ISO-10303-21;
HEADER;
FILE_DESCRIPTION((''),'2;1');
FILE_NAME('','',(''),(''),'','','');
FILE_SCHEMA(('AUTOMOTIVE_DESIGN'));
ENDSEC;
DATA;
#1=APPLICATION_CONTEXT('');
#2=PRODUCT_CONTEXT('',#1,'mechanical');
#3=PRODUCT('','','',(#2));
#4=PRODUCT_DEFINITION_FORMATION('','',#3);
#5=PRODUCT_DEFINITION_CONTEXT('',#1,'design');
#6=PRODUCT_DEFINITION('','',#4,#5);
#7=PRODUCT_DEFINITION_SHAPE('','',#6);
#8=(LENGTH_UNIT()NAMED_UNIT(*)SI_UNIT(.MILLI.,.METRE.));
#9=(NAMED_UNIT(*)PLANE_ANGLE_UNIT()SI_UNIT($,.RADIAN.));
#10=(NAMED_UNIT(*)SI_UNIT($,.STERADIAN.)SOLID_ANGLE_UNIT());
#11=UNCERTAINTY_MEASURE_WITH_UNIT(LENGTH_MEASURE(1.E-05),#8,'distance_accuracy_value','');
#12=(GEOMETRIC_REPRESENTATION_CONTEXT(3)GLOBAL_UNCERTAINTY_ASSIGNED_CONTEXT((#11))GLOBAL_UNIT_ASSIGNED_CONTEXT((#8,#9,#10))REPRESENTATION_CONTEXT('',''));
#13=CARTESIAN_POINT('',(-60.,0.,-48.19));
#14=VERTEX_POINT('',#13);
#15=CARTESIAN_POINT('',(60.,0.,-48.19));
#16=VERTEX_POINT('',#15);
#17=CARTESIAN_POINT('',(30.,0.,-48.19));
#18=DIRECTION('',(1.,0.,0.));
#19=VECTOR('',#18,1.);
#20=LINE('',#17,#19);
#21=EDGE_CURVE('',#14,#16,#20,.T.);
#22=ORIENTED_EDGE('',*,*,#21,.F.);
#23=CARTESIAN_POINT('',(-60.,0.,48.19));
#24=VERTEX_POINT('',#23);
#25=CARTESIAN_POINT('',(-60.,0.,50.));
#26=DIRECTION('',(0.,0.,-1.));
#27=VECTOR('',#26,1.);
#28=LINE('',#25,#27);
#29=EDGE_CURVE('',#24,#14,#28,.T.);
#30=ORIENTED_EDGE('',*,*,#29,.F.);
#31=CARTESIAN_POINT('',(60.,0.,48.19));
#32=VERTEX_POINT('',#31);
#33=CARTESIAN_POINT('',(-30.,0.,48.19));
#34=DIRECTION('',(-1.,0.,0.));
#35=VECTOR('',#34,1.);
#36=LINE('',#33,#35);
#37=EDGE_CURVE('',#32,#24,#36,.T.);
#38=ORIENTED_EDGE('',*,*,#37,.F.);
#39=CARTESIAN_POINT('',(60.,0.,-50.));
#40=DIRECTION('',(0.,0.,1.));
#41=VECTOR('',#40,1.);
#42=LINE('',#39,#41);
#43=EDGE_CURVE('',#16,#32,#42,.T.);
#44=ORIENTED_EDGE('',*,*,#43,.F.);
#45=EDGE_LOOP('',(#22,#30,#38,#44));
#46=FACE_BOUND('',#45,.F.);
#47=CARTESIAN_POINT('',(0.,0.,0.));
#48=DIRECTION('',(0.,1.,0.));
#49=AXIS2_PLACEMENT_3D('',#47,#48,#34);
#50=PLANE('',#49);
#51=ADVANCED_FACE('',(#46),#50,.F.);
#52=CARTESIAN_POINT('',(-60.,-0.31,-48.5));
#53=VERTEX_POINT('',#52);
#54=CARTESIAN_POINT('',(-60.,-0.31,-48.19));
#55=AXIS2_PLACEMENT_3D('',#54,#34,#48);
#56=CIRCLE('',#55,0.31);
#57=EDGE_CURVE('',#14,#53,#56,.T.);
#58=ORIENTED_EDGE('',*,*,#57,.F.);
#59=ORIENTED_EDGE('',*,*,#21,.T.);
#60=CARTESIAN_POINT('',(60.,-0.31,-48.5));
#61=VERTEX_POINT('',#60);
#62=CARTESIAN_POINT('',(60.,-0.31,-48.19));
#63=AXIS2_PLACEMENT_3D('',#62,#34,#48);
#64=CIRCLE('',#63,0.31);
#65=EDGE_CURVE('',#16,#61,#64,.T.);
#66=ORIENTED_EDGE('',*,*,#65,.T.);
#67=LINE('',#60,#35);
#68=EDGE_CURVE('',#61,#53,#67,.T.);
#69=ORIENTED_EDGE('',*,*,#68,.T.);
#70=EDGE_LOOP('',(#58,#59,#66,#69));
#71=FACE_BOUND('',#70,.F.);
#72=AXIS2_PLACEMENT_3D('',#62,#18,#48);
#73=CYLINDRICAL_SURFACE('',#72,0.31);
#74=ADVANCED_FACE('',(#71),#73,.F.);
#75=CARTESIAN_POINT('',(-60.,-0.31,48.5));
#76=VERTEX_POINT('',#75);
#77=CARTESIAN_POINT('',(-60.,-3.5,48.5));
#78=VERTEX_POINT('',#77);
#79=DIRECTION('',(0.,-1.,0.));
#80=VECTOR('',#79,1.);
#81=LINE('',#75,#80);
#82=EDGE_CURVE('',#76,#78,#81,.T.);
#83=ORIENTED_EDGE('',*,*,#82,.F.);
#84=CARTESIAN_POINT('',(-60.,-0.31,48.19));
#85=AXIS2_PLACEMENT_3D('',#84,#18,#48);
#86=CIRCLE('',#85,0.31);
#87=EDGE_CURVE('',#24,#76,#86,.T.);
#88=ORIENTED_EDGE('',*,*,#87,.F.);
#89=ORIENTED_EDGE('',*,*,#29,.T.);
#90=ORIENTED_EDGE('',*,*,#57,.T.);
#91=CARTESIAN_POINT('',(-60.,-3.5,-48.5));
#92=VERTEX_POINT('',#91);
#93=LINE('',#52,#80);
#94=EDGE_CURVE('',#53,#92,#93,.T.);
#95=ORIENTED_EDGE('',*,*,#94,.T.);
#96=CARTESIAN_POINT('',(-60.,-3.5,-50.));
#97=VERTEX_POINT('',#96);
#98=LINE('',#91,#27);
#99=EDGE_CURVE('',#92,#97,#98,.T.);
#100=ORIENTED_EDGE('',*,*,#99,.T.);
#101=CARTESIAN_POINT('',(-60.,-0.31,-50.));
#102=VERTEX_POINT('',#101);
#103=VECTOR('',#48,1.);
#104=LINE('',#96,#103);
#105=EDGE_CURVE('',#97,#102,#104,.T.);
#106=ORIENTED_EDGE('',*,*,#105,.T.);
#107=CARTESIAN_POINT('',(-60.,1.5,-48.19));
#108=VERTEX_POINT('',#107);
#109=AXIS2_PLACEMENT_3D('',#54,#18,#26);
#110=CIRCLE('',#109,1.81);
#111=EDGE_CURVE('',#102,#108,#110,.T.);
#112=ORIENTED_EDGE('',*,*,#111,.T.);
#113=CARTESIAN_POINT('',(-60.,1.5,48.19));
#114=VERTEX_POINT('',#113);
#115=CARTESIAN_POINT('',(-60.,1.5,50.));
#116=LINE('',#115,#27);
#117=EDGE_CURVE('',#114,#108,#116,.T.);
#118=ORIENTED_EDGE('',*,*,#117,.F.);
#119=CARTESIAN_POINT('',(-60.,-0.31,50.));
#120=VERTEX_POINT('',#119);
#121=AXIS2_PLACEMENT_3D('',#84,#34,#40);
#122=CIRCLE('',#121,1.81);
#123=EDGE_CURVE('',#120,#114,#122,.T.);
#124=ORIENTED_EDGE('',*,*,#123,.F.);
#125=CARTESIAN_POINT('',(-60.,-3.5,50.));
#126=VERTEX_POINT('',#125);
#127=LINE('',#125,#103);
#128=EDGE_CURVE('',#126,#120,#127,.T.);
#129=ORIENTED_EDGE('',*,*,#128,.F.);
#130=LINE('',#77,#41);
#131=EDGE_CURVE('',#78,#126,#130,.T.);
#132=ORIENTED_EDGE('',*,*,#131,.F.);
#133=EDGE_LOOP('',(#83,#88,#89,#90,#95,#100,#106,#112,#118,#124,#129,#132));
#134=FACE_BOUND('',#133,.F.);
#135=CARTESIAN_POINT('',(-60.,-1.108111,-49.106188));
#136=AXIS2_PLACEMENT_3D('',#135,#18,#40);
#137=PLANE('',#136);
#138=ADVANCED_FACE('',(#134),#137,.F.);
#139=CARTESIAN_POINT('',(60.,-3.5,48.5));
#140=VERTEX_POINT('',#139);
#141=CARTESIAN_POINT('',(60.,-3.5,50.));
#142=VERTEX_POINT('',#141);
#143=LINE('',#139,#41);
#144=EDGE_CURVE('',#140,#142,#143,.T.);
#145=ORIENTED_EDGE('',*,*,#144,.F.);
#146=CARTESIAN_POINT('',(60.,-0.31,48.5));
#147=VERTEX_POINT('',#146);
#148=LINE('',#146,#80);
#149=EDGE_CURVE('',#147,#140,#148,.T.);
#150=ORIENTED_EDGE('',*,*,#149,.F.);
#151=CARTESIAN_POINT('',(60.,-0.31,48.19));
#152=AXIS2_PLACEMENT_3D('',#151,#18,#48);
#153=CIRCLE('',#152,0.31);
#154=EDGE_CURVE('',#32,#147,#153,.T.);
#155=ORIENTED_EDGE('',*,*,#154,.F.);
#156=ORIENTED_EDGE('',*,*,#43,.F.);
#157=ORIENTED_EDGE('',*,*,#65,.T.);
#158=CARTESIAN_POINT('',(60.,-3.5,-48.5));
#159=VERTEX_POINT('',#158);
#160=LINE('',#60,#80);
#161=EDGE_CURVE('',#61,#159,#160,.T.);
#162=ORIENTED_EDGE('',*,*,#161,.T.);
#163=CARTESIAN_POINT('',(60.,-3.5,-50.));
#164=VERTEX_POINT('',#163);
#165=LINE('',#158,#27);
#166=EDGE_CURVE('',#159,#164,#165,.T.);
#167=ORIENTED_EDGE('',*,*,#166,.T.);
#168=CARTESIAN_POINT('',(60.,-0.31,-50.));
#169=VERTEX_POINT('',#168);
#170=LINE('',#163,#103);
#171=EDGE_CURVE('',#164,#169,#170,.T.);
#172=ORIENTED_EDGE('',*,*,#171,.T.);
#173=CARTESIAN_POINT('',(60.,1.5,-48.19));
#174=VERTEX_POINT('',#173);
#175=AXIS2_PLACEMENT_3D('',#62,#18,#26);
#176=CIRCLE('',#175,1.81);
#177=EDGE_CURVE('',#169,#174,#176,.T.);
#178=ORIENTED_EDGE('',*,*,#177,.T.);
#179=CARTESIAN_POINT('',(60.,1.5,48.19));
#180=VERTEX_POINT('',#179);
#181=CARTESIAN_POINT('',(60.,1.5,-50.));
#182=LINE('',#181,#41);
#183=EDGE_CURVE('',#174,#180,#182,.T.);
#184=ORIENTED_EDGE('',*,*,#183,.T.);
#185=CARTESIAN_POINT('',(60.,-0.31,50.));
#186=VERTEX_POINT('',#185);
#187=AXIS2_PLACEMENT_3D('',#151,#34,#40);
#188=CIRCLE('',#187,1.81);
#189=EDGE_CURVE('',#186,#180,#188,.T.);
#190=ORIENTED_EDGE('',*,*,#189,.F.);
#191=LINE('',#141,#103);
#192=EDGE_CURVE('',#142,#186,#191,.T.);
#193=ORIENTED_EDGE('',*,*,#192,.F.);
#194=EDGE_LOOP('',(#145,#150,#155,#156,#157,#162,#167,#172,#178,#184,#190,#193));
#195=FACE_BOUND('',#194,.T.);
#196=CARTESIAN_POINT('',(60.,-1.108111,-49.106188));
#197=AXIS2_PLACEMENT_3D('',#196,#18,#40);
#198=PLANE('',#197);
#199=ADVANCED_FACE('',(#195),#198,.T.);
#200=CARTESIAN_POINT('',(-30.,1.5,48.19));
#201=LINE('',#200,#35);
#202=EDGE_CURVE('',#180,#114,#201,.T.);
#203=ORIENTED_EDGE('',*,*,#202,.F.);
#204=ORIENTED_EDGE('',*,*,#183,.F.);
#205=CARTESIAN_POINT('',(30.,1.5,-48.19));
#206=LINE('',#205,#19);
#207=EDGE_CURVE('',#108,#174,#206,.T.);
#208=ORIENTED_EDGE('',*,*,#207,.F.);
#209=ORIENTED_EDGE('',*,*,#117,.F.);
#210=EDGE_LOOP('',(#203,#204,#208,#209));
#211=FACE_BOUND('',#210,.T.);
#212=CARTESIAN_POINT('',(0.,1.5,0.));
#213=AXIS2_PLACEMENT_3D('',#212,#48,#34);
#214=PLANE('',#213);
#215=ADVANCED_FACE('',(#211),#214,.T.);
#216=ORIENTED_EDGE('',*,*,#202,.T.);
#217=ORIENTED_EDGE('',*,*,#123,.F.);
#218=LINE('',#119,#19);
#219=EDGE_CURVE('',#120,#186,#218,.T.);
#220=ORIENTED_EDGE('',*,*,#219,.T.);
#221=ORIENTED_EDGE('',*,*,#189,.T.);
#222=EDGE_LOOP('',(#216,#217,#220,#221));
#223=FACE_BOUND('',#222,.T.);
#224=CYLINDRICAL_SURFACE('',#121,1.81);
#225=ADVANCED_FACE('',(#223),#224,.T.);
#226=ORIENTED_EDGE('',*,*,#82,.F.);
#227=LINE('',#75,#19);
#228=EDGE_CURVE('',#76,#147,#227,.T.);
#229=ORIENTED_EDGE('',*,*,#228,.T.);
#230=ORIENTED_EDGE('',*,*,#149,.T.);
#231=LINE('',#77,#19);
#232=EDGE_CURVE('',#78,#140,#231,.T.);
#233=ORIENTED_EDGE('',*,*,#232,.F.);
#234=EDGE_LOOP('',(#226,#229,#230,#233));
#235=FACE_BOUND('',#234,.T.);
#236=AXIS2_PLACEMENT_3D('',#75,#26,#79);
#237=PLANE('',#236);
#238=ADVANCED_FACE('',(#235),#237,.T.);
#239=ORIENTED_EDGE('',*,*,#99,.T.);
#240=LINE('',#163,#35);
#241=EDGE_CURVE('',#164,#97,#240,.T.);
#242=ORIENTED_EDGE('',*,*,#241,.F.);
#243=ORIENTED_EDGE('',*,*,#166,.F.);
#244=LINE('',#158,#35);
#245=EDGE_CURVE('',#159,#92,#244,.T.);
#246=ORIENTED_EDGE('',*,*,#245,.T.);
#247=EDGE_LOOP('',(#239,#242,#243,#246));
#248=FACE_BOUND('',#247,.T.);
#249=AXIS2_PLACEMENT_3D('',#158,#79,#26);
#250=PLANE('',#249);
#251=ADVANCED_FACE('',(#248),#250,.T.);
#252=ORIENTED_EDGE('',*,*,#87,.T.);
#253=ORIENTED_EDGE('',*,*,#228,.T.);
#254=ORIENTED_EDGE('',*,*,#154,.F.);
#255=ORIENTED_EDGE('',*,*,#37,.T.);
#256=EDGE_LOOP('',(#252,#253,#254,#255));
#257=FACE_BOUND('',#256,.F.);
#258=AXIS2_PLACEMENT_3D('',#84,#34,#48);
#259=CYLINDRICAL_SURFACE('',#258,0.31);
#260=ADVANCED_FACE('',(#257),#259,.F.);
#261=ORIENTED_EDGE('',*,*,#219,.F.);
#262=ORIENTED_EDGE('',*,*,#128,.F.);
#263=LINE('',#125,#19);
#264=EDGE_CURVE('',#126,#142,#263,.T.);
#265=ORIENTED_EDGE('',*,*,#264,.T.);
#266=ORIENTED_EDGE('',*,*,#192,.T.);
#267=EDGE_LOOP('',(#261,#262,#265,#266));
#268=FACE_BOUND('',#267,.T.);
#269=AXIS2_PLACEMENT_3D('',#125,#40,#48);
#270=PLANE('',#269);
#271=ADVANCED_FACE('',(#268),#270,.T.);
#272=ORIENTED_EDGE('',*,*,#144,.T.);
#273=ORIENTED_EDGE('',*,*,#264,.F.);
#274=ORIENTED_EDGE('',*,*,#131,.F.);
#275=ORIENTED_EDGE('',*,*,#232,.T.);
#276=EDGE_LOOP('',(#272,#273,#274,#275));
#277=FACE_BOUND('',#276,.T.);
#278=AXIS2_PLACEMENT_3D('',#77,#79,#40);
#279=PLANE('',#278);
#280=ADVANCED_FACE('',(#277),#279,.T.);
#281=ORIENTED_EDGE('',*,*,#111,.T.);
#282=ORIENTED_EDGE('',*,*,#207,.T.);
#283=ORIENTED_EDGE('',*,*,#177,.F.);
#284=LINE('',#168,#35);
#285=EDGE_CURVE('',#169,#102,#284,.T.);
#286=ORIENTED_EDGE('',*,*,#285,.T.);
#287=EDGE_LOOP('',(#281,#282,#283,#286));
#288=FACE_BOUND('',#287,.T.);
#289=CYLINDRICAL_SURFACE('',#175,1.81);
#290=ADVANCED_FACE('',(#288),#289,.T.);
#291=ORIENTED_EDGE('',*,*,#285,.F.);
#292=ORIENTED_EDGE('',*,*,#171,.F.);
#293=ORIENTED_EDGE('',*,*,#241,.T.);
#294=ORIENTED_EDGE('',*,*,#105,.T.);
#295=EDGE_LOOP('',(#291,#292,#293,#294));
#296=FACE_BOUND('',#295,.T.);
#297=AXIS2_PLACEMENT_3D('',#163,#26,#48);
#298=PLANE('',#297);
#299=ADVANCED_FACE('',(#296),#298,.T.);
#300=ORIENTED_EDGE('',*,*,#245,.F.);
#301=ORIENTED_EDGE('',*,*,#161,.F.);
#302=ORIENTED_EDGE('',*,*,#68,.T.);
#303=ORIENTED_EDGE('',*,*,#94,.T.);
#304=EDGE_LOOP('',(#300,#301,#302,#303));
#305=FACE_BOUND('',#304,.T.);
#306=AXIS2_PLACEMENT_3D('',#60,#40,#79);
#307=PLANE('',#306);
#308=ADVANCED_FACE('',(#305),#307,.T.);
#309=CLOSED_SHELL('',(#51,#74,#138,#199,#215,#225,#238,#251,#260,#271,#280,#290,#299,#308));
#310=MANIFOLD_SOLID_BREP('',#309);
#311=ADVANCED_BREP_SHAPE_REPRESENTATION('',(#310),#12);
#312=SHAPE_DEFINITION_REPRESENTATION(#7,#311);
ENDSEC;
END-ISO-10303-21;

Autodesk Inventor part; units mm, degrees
ref_plane "YZ Plane" through (0, 0, 0) normal (1, 0, 0) x (0, 1, 0)
ref_plane "XZ Plane" through (0, 0, 0) normal (0, 1, 0) x (-1, 0, 0)
ref_plane "XY Plane" through (0, 0, 0) normal (0, 0, 1) x (1, 0, 0)
sketch "Sketch1" plane through (0, 0, 0) normal (0, 1, 0) x (-1, 0, 0)
  line L0 (60, -50) -> (-60, -50)
  line L1 (-60, -50) -> (-60, 50)
  line L2 (-60, 50) -> (60, 50)
  line L3 (60, 50) -> (60, -50)
  point P0 (0, 0)
  dimension "d0" = 120
  dimension "d1" = 100
  dimension "d2" = 50
  dimension "d3" = 60
extrude "Plate1" add sketch "Sketch1" along normal blind 1.5
sketch "Sketch2" plane through (60, 1.5, -48.5) normal (0, 0, -1) x (-1, 0, 0)
  line L0 (120, 0) -> (0, 0)
  line L1 (0, 0) -> (0, -5)
  line L2 (0, -5) -> (120, -5)
  line L3 (120, -5) -> (120, 0)
edge flange "Flange1" height 5 angle 90 thickness 1.5 bend radius 0.31 thickness toward (0, 0, -1) relief tear relief width 1.5 relief depth 0.75 corner gap 0.31 corner form 0 edges at (0, 0, -50) (0, 0, 50) wall of the first edge with corners at (-60, 1.5, -48.5) (60, 1.5, -48.5) (60, -3.5, -48.5) (-60, -3.5, -48.5)
bend "Bend1"
corner "Corner1"
equation "\"d4\" = Thickness"
equation "\"d5\" = BendReliefWidth"
equation "\"d6\" = BendReliefDepth"
equation "\"d7\" = MinimumRemnant"
equation "\"d8\" = TransitionRadius"
equation "\"d11\" = BendRadius"
equation "\"d12\" = CornerReliefSize"
equation "\"d13\" = GapSize"
equation "\"d14\" = JacobiRadiusSize"
equation "\"BendReliefWidth\" = Thickness"
equation "\"BendReliefDepth\" = 0.5 * Thickness"
equation "\"CornerReliefSize\" = 4 * Thickness"
equation "\"MinimumRemnant\" = 2 * Thickness"
equation "\"TransitionRadius\" = BendRadius"
equation "\"JacobiRadiusSize\" = BendRadius"
equation "\"GapSize\" = Thickness"
equation "\"Thickness\" = 1.5"
equation "\"BendRadius\" = 0.31"
properties part number "axis_12_bottom_frame(bottom)" material "Aluminum 6061-AHC"
